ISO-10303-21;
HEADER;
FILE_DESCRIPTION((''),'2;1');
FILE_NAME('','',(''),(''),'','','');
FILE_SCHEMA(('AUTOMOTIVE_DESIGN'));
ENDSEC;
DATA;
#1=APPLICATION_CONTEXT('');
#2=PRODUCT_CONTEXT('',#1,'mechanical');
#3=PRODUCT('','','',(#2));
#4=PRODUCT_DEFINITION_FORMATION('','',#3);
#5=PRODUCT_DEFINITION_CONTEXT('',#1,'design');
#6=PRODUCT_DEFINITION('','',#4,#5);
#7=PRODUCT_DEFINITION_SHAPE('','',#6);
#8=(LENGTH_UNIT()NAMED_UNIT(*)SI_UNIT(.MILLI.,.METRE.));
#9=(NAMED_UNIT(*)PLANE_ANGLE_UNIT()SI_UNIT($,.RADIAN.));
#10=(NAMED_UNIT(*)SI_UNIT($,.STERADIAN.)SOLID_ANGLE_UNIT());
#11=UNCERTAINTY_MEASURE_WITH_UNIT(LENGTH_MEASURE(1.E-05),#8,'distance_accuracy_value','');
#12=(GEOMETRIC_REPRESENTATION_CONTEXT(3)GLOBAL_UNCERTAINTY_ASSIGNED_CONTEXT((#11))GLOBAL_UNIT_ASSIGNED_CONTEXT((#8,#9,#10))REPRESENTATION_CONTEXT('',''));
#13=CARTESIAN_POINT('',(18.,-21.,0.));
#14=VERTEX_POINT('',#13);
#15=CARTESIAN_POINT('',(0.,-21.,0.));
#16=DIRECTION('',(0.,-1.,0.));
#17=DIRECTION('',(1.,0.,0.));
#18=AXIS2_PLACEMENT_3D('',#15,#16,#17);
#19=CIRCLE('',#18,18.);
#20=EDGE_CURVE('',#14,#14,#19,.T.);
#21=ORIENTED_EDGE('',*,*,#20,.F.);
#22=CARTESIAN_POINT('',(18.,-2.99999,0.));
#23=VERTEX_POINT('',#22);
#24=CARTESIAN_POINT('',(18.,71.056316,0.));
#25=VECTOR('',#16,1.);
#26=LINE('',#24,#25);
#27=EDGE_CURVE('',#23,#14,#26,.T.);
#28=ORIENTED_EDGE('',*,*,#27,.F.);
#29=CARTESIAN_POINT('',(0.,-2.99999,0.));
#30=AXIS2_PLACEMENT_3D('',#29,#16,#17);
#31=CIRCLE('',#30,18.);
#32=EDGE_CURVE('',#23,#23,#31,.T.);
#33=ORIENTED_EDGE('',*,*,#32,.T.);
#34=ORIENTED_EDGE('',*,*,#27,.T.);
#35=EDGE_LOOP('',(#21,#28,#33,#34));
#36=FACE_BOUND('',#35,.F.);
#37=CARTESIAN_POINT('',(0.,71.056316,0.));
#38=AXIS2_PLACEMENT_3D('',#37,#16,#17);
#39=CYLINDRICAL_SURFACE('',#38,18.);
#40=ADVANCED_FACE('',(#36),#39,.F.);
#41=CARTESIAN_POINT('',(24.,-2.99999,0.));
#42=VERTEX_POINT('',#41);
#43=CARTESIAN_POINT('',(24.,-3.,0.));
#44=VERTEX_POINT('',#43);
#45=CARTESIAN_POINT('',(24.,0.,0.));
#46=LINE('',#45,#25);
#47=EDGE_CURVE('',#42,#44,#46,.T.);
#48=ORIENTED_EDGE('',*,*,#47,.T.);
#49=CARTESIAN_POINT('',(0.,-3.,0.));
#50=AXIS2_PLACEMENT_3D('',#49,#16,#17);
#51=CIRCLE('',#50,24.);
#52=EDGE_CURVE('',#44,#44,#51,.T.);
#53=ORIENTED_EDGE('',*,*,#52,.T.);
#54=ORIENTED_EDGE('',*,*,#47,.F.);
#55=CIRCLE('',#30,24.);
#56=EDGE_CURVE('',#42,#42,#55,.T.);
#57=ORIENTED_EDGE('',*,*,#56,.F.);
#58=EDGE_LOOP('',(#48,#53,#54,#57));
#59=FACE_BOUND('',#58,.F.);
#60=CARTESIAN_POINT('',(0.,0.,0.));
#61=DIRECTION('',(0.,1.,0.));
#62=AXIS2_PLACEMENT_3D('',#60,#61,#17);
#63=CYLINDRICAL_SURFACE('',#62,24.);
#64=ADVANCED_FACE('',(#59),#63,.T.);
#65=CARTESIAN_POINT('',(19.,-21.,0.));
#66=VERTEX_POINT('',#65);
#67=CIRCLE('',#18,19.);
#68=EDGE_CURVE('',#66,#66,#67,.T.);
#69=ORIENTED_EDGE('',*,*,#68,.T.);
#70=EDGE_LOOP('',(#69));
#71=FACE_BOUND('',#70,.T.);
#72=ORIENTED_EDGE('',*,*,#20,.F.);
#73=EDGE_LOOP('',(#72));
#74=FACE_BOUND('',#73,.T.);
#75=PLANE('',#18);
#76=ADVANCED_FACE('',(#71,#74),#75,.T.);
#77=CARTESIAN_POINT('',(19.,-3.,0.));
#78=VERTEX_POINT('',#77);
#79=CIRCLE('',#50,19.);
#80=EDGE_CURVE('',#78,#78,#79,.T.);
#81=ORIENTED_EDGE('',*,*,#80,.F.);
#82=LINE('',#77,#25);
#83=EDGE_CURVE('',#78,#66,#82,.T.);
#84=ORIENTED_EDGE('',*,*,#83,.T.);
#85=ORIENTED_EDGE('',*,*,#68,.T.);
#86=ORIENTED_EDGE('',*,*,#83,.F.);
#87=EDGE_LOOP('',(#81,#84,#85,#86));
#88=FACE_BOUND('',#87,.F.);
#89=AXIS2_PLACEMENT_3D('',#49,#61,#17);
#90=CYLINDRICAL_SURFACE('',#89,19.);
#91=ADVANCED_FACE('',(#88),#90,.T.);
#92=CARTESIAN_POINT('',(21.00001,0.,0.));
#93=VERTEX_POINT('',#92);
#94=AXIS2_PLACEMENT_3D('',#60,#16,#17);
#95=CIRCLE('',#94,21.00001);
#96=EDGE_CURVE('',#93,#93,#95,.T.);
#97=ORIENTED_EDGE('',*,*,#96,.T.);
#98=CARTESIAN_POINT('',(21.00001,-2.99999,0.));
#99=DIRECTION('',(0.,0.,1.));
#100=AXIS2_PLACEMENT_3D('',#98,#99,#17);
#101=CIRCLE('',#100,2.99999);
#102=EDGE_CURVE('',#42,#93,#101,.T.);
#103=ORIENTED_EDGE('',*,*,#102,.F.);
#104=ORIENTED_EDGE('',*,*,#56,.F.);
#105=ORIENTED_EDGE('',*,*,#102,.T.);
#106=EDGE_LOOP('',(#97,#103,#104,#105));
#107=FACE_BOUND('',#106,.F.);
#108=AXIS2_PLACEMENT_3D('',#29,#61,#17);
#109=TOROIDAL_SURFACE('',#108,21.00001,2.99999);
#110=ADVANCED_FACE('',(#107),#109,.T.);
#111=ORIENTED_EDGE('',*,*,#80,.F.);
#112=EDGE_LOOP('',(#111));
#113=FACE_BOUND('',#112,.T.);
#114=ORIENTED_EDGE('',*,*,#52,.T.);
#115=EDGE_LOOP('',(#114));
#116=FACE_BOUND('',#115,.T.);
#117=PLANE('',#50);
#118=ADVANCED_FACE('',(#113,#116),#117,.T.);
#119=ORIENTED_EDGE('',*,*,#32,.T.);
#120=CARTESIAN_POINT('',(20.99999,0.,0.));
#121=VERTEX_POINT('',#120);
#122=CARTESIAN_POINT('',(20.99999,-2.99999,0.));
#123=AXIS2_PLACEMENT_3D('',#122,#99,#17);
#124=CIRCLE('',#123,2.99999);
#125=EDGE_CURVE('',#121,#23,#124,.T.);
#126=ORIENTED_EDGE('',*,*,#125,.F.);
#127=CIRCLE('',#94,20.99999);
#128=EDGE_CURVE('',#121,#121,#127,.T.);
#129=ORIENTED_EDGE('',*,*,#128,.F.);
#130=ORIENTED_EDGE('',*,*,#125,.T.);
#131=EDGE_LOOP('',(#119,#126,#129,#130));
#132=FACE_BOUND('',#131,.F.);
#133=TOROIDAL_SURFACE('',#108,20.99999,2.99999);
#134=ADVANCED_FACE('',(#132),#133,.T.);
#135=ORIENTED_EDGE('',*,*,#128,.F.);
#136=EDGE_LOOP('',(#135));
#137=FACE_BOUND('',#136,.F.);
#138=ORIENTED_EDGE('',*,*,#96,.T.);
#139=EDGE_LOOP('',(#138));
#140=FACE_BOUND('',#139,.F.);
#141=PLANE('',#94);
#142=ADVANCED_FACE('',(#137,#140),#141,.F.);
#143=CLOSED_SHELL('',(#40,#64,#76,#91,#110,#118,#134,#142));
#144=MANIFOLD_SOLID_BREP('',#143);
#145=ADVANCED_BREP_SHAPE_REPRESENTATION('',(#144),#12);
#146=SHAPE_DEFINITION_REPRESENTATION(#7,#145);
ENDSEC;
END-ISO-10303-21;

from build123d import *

# Parameters (mm, degrees)
F0_R     = 24
F1_DEPTH = 3
F2_R     = 19
F3_DEPTH = 18
F5_D     = 36
F6_R     = 2.99999


# Not quite as in the source:
# - a fillet or chamfer is up to 0.001 mm smaller than in the source, because OpenCascade refuses the exact size


with BuildPart() as f1:
    # F0 (on Front) → F1 (new body)
    with BuildSketch(Plane.XZ):
        Circle(F0_R)
    extrude(amount=F1_DEPTH)

    # F2 (on face) → F3 (join)
    with BuildSketch(Plane.XZ.offset(3)):
        Circle(F2_R)
    extrude(amount=F3_DEPTH)

    # F5 (through all)
    with Locations(Plane(origin=(0, 0, 0), x_dir=(-1, 0, 0), z_dir=(0, 1, 0))):
        with Locations((0, 0)):
            Hole(F5_D / 2)

    # F6 (radius 3 in the source; OpenCascade refuses exactly that, so slightly less here)
    f6_edges = [f1.edges().sort_by_distance(p)[0] for p in [
        (-24, 0, 0),
        (18, 0, 0),
    ]]
    fillet(f6_edges, radius=F6_R)


solid = f1.part
